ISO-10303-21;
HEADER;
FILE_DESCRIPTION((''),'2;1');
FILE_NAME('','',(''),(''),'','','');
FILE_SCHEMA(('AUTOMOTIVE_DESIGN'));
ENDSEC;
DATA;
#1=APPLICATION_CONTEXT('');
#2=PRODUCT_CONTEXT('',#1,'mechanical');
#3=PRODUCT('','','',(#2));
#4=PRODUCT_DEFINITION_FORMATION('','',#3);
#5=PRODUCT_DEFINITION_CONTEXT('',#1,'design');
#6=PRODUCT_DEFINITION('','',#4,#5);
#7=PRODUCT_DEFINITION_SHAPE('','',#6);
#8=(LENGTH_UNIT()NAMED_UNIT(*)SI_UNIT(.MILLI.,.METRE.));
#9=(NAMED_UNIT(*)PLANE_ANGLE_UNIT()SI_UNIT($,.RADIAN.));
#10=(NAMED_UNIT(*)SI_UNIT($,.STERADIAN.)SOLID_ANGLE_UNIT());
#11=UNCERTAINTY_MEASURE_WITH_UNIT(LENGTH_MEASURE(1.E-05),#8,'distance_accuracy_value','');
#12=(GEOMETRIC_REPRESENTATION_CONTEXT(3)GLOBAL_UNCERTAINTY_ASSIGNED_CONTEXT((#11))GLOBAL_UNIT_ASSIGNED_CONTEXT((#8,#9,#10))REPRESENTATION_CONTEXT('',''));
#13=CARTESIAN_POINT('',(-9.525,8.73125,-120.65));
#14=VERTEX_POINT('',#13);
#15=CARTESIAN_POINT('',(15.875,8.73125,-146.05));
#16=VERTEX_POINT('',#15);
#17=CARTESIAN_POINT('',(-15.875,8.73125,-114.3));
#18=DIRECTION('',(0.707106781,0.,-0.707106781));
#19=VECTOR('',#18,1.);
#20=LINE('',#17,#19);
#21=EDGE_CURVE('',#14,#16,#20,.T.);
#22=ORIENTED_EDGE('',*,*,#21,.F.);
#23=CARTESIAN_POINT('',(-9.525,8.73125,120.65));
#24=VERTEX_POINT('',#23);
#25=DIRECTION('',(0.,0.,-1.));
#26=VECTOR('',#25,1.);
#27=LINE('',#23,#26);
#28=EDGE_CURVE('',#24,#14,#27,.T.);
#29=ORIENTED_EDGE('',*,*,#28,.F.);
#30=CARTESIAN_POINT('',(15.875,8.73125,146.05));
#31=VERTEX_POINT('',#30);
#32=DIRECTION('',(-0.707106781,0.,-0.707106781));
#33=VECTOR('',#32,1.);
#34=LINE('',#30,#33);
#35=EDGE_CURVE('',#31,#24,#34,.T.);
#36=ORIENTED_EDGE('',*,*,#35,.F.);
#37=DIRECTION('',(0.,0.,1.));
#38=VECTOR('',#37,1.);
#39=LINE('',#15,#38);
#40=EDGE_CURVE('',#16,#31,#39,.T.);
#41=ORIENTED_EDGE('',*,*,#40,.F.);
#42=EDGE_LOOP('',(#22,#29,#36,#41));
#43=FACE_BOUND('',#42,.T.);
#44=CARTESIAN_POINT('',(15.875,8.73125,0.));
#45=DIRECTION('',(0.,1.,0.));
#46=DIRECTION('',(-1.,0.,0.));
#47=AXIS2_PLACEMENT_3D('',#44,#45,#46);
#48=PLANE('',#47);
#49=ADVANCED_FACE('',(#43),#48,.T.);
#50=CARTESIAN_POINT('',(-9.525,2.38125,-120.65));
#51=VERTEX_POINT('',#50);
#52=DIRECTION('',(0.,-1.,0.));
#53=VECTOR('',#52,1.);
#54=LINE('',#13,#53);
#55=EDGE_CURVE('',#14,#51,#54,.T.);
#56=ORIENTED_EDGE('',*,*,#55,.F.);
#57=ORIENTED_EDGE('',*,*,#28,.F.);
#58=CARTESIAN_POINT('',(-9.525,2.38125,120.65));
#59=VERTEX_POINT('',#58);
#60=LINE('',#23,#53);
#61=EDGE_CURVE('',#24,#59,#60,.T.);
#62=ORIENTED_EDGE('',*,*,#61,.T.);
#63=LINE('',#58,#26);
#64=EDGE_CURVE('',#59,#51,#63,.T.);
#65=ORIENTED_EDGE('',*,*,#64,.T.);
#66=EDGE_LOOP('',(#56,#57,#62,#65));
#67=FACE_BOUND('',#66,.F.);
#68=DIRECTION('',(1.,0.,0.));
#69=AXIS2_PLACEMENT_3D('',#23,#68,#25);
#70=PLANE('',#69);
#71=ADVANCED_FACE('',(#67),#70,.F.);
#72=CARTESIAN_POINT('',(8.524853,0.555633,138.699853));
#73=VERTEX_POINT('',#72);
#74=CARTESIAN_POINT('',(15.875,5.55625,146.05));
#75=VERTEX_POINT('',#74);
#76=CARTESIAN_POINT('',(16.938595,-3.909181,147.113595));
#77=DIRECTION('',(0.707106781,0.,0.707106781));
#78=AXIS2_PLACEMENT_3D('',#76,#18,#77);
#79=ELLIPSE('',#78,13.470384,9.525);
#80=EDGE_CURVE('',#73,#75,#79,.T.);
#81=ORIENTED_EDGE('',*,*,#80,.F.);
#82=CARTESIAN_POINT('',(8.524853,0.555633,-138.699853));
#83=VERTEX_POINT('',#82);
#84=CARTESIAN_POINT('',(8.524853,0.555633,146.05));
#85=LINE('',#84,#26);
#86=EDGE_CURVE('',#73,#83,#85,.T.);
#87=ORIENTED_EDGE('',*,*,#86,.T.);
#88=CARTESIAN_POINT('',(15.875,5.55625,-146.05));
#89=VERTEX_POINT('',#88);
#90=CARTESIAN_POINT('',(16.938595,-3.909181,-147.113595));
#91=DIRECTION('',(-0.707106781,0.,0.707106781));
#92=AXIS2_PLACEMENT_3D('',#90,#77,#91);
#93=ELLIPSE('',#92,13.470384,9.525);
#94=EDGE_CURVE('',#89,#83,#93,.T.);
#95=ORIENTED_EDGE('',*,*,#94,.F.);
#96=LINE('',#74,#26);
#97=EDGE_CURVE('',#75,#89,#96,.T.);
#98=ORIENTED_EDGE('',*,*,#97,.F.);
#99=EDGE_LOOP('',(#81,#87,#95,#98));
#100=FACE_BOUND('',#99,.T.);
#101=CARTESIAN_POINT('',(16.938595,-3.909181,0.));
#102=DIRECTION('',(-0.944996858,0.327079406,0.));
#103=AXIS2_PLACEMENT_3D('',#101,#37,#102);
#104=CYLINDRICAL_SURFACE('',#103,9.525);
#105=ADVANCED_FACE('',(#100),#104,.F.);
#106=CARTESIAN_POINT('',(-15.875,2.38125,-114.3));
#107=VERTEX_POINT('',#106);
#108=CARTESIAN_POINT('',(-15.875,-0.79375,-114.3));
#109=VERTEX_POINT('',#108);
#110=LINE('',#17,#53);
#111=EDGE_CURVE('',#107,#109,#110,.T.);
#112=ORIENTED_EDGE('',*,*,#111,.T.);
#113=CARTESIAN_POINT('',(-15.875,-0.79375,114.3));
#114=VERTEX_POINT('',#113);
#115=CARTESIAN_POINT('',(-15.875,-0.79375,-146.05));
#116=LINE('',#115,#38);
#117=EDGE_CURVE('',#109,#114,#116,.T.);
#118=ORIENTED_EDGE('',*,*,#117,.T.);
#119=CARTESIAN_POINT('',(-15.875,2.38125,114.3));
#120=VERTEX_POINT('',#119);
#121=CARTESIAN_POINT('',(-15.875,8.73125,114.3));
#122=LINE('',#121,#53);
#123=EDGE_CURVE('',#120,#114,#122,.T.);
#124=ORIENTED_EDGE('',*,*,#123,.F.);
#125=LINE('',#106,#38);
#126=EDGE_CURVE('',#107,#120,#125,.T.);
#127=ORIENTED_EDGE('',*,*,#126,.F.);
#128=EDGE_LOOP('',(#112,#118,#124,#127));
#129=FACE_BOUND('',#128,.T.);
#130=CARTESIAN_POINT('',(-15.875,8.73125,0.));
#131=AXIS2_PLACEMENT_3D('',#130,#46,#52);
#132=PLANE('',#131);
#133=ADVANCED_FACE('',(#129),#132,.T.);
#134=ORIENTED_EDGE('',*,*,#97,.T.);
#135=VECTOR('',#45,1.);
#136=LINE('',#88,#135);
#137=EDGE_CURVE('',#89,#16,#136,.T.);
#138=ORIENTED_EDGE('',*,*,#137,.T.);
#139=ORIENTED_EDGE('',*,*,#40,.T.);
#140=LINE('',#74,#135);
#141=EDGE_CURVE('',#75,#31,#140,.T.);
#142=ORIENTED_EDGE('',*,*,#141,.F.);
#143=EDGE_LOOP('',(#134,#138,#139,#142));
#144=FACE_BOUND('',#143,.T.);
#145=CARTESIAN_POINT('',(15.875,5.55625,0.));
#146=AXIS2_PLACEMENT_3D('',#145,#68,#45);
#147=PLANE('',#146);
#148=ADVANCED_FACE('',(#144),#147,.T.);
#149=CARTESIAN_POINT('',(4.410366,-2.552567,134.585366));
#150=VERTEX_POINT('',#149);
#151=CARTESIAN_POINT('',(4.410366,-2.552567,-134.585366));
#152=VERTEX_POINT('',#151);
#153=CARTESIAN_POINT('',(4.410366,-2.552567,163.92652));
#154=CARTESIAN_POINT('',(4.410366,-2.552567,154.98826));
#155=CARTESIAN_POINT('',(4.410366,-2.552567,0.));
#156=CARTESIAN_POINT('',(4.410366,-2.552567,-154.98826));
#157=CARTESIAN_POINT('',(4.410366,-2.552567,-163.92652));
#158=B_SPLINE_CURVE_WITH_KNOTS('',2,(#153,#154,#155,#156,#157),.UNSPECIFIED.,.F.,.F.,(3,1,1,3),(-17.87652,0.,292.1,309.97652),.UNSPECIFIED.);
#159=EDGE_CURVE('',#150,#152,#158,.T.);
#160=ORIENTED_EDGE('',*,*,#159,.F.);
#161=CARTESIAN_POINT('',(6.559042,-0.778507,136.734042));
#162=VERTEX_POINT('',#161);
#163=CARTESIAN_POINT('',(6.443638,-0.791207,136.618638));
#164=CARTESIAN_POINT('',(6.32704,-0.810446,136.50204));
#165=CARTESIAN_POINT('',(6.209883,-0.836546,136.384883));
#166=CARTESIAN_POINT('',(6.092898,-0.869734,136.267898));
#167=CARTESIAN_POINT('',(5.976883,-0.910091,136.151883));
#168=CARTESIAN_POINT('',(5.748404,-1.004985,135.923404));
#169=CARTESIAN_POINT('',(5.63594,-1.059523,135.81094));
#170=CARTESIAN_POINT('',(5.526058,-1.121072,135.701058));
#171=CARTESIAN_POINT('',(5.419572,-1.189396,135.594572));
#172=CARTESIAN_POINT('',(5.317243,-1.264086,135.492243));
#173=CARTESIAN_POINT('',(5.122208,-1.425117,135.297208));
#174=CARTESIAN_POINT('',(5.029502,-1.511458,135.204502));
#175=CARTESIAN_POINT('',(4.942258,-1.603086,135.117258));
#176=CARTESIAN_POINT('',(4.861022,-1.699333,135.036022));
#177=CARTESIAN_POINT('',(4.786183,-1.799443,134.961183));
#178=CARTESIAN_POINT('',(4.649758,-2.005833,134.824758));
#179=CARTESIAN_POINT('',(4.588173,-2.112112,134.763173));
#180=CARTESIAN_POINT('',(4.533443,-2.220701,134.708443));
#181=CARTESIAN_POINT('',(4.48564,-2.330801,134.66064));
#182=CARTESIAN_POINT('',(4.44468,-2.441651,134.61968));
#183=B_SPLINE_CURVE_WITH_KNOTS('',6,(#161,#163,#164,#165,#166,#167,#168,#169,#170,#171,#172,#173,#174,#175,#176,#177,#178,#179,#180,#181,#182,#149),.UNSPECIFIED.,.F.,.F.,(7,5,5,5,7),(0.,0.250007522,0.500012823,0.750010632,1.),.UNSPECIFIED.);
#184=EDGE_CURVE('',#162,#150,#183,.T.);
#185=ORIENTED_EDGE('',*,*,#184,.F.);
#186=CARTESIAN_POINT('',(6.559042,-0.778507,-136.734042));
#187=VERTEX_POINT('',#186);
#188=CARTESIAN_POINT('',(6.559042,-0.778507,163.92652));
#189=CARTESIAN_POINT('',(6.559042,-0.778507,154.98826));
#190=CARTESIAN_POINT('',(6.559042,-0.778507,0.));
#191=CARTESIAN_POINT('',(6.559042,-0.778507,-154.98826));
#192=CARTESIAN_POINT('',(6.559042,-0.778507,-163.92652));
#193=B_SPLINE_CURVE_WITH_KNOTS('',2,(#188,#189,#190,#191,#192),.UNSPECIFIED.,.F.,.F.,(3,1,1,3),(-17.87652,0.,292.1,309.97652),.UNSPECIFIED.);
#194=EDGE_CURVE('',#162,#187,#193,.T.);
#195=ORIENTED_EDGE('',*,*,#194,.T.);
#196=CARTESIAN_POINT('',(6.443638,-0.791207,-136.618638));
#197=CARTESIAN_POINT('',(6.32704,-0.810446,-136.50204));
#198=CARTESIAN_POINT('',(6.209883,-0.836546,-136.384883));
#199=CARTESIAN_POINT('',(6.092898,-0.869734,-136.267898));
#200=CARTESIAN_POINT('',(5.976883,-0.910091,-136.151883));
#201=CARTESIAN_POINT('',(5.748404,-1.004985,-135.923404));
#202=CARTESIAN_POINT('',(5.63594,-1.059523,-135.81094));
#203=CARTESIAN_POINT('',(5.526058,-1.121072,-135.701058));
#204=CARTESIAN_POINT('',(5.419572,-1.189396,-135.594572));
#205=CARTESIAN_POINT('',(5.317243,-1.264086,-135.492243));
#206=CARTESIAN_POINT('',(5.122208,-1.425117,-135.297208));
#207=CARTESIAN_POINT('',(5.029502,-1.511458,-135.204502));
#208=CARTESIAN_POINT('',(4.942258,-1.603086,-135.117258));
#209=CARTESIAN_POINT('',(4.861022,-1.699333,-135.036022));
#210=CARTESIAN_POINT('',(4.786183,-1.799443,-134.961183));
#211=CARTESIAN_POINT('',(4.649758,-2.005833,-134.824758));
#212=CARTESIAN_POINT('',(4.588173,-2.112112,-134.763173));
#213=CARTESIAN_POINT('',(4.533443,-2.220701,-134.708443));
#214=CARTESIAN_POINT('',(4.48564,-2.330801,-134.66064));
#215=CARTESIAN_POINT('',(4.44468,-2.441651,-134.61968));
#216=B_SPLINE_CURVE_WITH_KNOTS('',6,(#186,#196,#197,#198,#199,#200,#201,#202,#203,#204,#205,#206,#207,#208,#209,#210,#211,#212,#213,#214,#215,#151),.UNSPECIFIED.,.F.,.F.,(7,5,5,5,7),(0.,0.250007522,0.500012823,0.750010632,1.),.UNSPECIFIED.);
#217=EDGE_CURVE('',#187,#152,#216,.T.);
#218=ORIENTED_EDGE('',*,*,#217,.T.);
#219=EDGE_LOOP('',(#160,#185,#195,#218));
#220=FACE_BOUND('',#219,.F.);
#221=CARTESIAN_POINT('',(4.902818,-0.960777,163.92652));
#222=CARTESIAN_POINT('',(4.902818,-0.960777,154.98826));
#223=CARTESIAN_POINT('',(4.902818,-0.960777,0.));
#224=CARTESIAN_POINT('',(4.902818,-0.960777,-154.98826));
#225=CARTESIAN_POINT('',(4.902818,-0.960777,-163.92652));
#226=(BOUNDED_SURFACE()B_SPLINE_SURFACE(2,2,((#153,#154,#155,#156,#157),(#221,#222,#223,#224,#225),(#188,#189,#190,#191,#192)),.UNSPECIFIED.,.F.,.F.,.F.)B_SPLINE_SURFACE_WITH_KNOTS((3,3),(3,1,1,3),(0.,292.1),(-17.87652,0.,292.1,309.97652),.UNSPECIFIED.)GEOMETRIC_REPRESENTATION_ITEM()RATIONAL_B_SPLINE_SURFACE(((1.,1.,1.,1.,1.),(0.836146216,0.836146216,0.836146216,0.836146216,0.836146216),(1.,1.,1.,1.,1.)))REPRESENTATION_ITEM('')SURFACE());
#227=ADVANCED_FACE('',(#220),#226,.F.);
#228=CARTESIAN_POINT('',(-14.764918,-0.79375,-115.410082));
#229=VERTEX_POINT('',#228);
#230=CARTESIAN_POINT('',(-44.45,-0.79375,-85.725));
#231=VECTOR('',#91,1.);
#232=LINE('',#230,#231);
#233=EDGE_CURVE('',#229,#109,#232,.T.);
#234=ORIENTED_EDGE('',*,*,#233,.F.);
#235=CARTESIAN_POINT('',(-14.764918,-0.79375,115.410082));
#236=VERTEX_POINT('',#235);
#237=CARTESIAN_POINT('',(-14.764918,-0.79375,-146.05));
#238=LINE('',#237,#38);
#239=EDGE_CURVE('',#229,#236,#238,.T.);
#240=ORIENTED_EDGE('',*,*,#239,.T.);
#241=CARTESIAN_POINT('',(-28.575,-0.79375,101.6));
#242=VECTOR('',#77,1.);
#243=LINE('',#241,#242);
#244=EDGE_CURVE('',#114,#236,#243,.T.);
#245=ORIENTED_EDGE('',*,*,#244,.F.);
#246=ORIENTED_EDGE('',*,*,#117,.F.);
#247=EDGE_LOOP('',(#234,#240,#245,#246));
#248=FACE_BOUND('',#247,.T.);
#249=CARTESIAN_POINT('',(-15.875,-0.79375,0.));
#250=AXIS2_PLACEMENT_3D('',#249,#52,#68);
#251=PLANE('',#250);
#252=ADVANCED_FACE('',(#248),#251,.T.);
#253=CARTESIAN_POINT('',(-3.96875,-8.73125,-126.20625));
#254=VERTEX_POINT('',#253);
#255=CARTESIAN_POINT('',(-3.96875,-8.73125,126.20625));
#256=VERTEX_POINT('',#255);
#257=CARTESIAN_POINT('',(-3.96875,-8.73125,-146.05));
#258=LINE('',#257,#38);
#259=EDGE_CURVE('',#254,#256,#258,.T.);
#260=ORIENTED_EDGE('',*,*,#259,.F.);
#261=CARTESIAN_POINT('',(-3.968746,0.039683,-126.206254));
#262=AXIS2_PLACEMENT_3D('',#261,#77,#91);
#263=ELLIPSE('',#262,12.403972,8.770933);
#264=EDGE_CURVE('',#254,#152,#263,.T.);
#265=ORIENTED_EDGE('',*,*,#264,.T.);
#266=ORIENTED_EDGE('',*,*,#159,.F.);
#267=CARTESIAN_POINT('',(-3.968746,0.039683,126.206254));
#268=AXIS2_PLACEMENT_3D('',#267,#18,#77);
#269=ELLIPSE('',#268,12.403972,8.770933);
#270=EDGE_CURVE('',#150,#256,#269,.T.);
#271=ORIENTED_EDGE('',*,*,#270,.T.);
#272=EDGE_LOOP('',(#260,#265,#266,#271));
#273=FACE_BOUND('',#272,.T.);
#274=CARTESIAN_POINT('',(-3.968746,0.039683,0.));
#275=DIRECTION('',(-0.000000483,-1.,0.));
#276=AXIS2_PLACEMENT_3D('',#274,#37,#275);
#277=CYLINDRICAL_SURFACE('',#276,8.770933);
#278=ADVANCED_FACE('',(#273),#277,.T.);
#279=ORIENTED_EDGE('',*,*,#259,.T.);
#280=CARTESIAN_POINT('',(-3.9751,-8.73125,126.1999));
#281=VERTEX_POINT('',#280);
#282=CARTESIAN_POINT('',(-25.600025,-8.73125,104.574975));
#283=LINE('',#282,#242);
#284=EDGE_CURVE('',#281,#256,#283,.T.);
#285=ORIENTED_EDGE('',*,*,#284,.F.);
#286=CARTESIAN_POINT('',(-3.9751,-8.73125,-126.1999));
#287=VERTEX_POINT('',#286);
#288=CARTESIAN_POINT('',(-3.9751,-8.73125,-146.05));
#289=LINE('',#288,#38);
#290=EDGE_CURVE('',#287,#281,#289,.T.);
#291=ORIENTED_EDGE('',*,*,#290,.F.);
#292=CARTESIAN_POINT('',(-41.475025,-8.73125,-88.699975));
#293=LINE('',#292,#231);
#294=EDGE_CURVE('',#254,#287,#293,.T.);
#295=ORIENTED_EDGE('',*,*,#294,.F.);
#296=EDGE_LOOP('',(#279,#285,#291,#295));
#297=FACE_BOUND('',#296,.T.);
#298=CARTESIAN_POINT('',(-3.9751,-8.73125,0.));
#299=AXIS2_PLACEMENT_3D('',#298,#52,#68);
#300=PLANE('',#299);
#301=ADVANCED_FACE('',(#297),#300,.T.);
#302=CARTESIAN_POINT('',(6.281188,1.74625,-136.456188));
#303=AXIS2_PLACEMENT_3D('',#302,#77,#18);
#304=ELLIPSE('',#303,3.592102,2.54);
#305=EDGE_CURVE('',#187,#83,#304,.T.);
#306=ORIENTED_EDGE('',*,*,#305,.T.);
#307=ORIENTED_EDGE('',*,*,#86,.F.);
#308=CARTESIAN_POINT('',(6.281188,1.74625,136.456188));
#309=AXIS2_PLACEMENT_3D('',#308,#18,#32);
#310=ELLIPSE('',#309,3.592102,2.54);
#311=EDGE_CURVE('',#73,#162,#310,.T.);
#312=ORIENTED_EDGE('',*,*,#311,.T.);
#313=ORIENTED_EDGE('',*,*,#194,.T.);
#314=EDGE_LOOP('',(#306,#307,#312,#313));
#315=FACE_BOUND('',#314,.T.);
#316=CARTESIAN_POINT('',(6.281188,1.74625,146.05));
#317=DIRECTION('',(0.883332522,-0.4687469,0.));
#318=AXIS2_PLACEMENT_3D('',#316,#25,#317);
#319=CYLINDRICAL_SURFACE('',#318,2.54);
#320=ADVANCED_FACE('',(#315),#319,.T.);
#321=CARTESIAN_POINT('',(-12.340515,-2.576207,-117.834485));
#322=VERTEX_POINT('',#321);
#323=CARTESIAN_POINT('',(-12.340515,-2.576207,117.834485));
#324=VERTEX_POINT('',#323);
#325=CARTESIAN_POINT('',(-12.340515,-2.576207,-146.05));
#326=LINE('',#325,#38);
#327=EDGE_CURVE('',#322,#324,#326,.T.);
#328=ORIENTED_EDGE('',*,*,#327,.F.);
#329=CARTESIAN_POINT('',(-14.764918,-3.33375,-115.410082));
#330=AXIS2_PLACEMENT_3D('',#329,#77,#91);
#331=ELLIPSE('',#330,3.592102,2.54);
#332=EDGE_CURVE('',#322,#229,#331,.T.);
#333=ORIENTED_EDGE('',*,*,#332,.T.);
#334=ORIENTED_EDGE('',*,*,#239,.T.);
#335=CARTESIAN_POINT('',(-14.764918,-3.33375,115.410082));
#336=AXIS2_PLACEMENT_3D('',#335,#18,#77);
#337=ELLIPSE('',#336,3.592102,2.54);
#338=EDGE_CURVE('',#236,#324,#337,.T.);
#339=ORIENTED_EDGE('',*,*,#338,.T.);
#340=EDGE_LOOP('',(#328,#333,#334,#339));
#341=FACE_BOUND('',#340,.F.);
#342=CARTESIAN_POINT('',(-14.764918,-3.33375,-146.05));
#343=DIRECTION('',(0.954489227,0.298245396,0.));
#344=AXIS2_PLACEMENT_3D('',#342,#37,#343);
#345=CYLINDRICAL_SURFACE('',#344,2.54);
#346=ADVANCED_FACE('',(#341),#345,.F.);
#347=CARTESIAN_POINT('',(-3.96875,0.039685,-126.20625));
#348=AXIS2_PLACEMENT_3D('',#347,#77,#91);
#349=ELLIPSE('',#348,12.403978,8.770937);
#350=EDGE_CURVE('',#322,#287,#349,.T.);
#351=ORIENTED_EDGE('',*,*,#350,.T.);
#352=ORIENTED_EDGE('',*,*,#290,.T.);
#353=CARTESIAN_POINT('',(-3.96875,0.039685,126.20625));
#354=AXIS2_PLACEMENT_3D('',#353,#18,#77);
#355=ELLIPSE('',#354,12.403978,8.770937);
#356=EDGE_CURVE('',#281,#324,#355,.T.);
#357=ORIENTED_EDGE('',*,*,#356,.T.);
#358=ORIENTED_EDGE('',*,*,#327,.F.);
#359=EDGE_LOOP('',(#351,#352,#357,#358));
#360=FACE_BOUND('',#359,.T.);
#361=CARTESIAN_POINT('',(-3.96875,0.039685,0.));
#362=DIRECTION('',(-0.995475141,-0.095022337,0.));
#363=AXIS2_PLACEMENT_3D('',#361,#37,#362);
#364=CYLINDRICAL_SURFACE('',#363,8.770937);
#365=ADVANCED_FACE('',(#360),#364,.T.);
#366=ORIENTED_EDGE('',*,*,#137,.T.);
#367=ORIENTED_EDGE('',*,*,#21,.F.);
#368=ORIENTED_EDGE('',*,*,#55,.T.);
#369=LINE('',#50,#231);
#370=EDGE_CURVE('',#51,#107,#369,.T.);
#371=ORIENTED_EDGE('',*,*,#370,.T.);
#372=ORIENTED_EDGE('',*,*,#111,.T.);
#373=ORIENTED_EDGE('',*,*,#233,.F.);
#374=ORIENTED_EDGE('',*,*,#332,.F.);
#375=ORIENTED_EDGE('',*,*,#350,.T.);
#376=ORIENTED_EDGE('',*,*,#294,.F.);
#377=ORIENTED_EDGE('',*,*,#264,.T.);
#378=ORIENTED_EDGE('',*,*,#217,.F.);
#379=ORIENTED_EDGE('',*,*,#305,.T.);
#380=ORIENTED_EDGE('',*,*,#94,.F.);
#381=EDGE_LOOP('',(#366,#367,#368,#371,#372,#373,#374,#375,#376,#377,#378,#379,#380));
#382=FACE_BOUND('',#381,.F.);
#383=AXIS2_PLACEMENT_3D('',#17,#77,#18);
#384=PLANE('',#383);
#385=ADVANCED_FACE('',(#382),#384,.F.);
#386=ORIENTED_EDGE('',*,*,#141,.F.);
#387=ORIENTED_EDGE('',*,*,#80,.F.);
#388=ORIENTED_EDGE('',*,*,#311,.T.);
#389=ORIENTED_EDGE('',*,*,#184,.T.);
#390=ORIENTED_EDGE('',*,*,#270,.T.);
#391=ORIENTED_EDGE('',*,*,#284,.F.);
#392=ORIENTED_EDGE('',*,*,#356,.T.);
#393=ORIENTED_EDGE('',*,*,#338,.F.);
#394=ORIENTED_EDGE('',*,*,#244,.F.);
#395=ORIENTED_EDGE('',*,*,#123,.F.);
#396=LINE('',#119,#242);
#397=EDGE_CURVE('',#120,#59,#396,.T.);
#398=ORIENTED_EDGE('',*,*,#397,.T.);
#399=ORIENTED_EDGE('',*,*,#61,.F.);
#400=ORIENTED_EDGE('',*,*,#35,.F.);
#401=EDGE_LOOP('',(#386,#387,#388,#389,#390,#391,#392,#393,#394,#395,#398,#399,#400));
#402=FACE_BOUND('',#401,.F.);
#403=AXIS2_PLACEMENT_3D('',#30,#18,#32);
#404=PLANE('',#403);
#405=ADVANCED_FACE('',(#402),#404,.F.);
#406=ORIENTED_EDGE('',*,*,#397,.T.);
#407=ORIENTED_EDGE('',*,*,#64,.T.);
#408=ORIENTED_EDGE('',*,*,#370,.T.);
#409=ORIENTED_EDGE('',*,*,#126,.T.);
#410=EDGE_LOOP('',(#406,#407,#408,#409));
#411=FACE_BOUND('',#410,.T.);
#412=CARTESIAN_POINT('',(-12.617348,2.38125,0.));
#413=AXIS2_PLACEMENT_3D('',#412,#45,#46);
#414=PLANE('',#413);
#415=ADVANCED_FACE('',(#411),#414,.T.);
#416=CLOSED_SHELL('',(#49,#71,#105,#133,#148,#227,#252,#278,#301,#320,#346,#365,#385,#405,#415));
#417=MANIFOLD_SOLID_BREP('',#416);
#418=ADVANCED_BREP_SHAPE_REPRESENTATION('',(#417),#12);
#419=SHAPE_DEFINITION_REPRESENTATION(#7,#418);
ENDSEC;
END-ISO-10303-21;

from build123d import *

# Parameters (mm, degrees)
F1_DEPTH = 146.05
F2_R     = 2.54
F3_R     = 2.54
F4_R     = 2.54
F6_DEPTH = 17.4635001
F8_DEPTH = 6.35


# Not quite as in the source:
# - ends of sketch curves that miss each other by under 0.0002 mm in the source are joined


with BuildPart() as f1:
    # F0 (on Top) → F1 (new body, symmetric)
    with BuildSketch(Plane.XY):
        with BuildLine():
            Line((15.875, 5.55625), (15.875, 8.73125))
            Line((15.875, 8.73125), (-15.875, 8.73125))
            Line((-15.875, 8.73125), (-15.875, -0.79375))
            Line((-15.875, -0.79375), (-12.7, -0.79375))
            ThreePointArc((-12.7, -0.79375), (-9.8710707302, -6.4481459867), (-3.9751, -8.73125))
            Line((-3.9751, -8.73125), (-3.96875, -8.73125))
            ThreePointArc((-3.96875, -8.73125), (1.9312218072, -6.4502821485), (4.7625, -0.79375))
            Line((4.7625, -0.79375), (7.9375, -0.79375))
            ThreePointArc((7.9375, -0.79375), (10.9883747468, 3.5285940665), (15.875, 5.55625))
        make_face()
    extrude(amount=F1_DEPTH, both=True)

    # F2
    f2_edges = [f1.edges().sort_by_distance(p)[0] for p in [
        (7.9375, -0.79375, 0),
    ]]
    fillet(f2_edges, radius=F2_R)

    # F3
    f3_edges = [f1.edges().sort_by_distance(p)[0] for p in [
        (-12.7, -0.79375, 0),
    ]]
    fillet(f3_edges, radius=F3_R)

    # F4
    f4_edges = [f1.edges().sort_by_distance(p)[0] for p in [
        (4.7625, -0.79375, 0),
    ]]
    fillet(f4_edges, radius=F4_R)

    # F5 (on face) → F6 (cut, through all)
    with BuildSketch(Plane(origin=(0, 8.73125, 0), x_dir=(-1, 0, 0), z_dir=(0, 1, 0))):
        Polygon((15.875, 146.05), (-15.875, 146.05), (15.875, 114.3), align=None)
        Polygon((15.875, -114.3), (-15.875, -146.05), (15.875, -146.05), align=None)
    extrude(amount=-F6_DEPTH, mode=Mode.SUBTRACT)

    # F7 (on face) → F8 (cut)
    with BuildSketch(Plane(origin=(0, 8.73125, 0), x_dir=(-1, 0, 0), z_dir=(0, 1, 0))):
        Polygon((9.525, 120.65), (9.525, -120.65), (15.875, -114.3), (15.875, 114.3), align=None)
    extrude(amount=-F8_DEPTH, mode=Mode.SUBTRACT)


solid = f1.part
